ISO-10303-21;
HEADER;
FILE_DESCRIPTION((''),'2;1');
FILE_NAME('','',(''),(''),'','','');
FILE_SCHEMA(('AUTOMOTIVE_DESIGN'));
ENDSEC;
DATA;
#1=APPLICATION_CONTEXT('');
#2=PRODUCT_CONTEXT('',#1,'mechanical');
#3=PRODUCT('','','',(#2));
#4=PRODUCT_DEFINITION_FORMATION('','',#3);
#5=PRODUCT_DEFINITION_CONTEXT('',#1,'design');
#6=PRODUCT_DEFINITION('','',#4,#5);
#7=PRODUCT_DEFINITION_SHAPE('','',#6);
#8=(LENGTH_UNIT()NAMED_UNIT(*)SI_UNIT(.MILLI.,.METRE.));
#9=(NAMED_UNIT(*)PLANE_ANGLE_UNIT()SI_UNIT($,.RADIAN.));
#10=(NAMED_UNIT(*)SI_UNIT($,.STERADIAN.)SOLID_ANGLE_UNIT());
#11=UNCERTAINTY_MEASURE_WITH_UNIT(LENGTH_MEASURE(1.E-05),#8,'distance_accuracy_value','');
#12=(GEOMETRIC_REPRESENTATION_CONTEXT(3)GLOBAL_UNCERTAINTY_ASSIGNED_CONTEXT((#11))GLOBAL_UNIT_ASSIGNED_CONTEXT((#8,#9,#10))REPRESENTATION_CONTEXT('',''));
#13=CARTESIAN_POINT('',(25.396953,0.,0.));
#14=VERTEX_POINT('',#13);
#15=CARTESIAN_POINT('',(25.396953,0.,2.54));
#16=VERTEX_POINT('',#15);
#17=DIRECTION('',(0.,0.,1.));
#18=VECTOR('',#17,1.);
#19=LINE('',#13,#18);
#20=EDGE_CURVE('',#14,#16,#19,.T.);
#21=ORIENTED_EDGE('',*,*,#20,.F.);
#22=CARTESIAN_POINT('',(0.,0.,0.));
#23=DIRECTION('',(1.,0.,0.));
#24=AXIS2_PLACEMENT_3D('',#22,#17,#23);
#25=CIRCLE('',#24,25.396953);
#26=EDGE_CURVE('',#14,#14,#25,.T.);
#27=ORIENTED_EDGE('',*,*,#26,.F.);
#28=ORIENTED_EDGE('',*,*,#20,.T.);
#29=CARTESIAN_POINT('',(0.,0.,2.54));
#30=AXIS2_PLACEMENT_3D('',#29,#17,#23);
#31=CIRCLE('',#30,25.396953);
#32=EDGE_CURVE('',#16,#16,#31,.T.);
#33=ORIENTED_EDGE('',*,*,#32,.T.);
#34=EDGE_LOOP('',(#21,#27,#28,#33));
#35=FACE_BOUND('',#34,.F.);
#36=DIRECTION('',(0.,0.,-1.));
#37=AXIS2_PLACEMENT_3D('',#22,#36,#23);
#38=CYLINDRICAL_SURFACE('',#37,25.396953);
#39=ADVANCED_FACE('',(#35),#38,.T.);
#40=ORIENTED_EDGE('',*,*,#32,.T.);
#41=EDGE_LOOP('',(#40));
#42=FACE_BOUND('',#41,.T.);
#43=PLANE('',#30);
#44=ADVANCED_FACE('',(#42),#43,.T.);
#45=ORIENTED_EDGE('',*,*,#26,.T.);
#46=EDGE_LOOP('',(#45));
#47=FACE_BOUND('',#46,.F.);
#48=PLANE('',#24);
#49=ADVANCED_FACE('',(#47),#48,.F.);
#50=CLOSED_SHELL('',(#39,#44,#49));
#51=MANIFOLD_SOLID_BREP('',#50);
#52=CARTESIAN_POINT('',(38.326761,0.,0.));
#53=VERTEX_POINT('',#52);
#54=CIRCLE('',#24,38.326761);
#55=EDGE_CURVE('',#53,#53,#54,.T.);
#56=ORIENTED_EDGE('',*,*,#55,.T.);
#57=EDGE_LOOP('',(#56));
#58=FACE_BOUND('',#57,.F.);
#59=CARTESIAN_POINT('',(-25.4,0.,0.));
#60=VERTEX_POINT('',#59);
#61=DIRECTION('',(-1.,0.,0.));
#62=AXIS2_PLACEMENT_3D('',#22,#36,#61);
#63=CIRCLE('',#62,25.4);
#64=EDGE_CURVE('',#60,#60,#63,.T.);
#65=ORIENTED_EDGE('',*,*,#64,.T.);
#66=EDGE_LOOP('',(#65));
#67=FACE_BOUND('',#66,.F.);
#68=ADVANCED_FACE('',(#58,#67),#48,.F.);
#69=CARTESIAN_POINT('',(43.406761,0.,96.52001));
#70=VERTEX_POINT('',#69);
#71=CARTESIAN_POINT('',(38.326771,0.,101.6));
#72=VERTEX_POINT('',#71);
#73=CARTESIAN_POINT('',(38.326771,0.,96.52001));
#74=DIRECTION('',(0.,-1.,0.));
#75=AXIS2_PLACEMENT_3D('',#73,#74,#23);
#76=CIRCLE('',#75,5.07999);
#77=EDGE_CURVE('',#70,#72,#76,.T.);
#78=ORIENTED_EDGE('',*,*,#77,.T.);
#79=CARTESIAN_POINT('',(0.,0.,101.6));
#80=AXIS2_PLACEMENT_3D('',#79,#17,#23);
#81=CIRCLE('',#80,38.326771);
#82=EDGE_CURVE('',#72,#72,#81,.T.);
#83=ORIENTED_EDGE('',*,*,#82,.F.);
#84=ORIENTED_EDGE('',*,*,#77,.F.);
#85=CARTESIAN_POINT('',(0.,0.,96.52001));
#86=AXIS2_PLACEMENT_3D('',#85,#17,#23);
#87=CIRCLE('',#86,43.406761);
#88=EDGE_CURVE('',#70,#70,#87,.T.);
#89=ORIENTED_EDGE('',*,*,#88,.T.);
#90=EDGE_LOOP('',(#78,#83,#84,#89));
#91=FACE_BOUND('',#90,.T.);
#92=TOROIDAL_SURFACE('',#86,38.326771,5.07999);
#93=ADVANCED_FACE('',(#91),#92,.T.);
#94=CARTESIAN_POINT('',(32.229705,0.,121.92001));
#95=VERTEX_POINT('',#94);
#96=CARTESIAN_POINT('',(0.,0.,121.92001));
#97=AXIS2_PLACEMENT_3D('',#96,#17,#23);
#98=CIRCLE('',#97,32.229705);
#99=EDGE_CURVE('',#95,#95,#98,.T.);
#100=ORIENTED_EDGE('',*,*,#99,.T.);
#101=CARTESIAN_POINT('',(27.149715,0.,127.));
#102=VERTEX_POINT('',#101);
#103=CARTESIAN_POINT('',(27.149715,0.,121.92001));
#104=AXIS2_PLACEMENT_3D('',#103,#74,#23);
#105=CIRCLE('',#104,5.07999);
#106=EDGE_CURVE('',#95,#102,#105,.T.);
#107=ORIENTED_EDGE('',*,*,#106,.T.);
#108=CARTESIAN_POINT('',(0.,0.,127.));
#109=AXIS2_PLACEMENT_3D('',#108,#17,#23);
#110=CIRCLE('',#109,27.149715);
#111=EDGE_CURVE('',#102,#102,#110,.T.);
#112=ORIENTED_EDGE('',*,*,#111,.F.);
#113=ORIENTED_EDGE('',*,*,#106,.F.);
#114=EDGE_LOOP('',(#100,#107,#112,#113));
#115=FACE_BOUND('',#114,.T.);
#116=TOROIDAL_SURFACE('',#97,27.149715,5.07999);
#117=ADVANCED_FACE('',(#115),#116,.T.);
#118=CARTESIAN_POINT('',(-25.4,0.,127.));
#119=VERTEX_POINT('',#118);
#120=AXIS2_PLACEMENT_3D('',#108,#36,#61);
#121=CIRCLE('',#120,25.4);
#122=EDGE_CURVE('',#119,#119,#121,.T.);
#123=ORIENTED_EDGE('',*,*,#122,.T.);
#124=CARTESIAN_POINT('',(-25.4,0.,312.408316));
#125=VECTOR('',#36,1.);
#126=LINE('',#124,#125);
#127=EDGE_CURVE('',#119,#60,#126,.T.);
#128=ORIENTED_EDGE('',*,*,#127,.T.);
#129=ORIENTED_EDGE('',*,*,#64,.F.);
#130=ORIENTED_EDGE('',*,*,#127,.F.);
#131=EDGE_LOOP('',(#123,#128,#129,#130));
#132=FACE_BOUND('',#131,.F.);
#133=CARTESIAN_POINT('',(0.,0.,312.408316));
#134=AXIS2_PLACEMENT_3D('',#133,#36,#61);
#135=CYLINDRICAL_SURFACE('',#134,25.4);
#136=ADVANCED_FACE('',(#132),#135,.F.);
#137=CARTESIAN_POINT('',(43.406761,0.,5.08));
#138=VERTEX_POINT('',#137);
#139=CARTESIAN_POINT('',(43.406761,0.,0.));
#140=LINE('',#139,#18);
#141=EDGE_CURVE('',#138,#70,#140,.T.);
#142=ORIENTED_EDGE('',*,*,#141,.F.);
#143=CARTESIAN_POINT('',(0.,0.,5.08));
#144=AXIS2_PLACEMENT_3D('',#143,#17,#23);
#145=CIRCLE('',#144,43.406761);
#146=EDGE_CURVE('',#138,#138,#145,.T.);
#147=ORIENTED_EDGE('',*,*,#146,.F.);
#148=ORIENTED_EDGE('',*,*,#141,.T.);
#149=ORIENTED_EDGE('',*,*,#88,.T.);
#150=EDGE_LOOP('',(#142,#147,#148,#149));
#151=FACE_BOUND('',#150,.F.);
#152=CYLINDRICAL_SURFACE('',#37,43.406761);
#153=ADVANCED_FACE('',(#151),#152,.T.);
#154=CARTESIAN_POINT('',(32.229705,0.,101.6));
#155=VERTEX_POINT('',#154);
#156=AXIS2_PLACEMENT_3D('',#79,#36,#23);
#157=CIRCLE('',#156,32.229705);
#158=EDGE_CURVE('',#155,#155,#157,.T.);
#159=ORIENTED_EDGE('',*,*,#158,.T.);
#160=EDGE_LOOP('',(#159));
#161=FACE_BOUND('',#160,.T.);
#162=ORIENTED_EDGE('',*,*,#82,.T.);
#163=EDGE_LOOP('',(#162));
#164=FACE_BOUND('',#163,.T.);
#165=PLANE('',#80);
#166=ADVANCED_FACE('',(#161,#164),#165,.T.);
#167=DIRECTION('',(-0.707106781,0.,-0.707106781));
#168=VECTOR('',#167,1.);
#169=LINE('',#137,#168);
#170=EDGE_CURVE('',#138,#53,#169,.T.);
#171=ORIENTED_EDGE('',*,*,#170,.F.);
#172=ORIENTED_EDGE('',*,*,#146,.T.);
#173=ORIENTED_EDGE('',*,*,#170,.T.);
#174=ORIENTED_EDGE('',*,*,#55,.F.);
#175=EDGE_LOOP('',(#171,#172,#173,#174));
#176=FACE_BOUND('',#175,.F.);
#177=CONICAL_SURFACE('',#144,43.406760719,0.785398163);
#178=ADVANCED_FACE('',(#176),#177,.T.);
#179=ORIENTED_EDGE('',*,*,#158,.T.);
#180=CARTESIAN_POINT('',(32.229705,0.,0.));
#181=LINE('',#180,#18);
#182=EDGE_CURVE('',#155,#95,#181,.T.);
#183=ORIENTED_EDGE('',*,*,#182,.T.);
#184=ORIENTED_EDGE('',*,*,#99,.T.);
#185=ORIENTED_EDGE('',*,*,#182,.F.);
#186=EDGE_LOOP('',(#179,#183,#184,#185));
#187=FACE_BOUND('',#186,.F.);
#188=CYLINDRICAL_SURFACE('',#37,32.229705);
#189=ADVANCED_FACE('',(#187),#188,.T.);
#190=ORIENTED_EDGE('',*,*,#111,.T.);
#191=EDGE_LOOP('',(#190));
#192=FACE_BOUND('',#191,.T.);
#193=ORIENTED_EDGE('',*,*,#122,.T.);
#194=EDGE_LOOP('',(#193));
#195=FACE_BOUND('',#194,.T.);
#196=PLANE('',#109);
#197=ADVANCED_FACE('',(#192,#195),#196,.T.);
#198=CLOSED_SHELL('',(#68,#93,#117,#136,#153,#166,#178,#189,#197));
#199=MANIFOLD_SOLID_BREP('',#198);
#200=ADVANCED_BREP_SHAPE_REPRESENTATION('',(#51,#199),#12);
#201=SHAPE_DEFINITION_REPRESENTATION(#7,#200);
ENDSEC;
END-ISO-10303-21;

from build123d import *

# Parameters (mm, degrees)
F0_R      = 43.406760719
F0_R_2    = 31.872207378
F1_DEPTH  = 101.6
F2_R      = 32.2297053781
F3_DEPTH  = 127
F4_R      = 21.0037337021
F5_DEPTH  = 132.08
F6_R      = 5.07999
F7_SIZE   = 5.08
F9_D      = 50.8
F10_R     = 25.396952853
F11_DEPTH = 2.54


# Not quite as in the source:
# - a fillet or chamfer is up to 0.001 mm smaller than in the source, because OpenCascade refuses the exact size


with BuildPart() as f1:
    # F0 (on Top) → F1 (new body)
    with BuildSketch(Plane.XY):
        Circle(F0_R)
        Circle(F0_R_2, mode=Mode.SUBTRACT)
    extrude(amount=F1_DEPTH)

    # F2 (on Top) → F3 (join)
    with BuildSketch(Plane.XY):
        Circle(F2_R)
    extrude(amount=F3_DEPTH)

    # F4 (on Top) → F5 (join)
    with BuildSketch(Plane.XY):
        Circle(F4_R)
    extrude(amount=F5_DEPTH)

    # F6 (radius 5.08 in the source; OpenCascade refuses exactly that, so slightly less here)
    f6_edges = [f1.edges().sort_by_distance(p)[0] for p in [
        (-43.406761, 0, 101.6),
        (-32.229705, 0, 127),
        (-21.003734, 0, 132.08),
    ]]
    fillet(f6_edges, radius=F6_R)

    # F7
    f7_edges = [f1.edges().sort_by_distance(p)[0] for p in [
        (-43.406761, 0, 0),
    ]]
    chamfer(f7_edges, length=F7_SIZE)

    # F9 (through all)
    with Locations(Plane.XY.offset(132.08)):
        with Locations((0, 0)):
            Hole(F9_D / 2)


with BuildPart() as f11:
    # F10 (on Top) → F11 (new body)
    with BuildSketch(Plane.XY):
        Circle(F10_R)
    extrude(amount=F11_DEPTH)


solid = Compound([f1.part, f11.part])
